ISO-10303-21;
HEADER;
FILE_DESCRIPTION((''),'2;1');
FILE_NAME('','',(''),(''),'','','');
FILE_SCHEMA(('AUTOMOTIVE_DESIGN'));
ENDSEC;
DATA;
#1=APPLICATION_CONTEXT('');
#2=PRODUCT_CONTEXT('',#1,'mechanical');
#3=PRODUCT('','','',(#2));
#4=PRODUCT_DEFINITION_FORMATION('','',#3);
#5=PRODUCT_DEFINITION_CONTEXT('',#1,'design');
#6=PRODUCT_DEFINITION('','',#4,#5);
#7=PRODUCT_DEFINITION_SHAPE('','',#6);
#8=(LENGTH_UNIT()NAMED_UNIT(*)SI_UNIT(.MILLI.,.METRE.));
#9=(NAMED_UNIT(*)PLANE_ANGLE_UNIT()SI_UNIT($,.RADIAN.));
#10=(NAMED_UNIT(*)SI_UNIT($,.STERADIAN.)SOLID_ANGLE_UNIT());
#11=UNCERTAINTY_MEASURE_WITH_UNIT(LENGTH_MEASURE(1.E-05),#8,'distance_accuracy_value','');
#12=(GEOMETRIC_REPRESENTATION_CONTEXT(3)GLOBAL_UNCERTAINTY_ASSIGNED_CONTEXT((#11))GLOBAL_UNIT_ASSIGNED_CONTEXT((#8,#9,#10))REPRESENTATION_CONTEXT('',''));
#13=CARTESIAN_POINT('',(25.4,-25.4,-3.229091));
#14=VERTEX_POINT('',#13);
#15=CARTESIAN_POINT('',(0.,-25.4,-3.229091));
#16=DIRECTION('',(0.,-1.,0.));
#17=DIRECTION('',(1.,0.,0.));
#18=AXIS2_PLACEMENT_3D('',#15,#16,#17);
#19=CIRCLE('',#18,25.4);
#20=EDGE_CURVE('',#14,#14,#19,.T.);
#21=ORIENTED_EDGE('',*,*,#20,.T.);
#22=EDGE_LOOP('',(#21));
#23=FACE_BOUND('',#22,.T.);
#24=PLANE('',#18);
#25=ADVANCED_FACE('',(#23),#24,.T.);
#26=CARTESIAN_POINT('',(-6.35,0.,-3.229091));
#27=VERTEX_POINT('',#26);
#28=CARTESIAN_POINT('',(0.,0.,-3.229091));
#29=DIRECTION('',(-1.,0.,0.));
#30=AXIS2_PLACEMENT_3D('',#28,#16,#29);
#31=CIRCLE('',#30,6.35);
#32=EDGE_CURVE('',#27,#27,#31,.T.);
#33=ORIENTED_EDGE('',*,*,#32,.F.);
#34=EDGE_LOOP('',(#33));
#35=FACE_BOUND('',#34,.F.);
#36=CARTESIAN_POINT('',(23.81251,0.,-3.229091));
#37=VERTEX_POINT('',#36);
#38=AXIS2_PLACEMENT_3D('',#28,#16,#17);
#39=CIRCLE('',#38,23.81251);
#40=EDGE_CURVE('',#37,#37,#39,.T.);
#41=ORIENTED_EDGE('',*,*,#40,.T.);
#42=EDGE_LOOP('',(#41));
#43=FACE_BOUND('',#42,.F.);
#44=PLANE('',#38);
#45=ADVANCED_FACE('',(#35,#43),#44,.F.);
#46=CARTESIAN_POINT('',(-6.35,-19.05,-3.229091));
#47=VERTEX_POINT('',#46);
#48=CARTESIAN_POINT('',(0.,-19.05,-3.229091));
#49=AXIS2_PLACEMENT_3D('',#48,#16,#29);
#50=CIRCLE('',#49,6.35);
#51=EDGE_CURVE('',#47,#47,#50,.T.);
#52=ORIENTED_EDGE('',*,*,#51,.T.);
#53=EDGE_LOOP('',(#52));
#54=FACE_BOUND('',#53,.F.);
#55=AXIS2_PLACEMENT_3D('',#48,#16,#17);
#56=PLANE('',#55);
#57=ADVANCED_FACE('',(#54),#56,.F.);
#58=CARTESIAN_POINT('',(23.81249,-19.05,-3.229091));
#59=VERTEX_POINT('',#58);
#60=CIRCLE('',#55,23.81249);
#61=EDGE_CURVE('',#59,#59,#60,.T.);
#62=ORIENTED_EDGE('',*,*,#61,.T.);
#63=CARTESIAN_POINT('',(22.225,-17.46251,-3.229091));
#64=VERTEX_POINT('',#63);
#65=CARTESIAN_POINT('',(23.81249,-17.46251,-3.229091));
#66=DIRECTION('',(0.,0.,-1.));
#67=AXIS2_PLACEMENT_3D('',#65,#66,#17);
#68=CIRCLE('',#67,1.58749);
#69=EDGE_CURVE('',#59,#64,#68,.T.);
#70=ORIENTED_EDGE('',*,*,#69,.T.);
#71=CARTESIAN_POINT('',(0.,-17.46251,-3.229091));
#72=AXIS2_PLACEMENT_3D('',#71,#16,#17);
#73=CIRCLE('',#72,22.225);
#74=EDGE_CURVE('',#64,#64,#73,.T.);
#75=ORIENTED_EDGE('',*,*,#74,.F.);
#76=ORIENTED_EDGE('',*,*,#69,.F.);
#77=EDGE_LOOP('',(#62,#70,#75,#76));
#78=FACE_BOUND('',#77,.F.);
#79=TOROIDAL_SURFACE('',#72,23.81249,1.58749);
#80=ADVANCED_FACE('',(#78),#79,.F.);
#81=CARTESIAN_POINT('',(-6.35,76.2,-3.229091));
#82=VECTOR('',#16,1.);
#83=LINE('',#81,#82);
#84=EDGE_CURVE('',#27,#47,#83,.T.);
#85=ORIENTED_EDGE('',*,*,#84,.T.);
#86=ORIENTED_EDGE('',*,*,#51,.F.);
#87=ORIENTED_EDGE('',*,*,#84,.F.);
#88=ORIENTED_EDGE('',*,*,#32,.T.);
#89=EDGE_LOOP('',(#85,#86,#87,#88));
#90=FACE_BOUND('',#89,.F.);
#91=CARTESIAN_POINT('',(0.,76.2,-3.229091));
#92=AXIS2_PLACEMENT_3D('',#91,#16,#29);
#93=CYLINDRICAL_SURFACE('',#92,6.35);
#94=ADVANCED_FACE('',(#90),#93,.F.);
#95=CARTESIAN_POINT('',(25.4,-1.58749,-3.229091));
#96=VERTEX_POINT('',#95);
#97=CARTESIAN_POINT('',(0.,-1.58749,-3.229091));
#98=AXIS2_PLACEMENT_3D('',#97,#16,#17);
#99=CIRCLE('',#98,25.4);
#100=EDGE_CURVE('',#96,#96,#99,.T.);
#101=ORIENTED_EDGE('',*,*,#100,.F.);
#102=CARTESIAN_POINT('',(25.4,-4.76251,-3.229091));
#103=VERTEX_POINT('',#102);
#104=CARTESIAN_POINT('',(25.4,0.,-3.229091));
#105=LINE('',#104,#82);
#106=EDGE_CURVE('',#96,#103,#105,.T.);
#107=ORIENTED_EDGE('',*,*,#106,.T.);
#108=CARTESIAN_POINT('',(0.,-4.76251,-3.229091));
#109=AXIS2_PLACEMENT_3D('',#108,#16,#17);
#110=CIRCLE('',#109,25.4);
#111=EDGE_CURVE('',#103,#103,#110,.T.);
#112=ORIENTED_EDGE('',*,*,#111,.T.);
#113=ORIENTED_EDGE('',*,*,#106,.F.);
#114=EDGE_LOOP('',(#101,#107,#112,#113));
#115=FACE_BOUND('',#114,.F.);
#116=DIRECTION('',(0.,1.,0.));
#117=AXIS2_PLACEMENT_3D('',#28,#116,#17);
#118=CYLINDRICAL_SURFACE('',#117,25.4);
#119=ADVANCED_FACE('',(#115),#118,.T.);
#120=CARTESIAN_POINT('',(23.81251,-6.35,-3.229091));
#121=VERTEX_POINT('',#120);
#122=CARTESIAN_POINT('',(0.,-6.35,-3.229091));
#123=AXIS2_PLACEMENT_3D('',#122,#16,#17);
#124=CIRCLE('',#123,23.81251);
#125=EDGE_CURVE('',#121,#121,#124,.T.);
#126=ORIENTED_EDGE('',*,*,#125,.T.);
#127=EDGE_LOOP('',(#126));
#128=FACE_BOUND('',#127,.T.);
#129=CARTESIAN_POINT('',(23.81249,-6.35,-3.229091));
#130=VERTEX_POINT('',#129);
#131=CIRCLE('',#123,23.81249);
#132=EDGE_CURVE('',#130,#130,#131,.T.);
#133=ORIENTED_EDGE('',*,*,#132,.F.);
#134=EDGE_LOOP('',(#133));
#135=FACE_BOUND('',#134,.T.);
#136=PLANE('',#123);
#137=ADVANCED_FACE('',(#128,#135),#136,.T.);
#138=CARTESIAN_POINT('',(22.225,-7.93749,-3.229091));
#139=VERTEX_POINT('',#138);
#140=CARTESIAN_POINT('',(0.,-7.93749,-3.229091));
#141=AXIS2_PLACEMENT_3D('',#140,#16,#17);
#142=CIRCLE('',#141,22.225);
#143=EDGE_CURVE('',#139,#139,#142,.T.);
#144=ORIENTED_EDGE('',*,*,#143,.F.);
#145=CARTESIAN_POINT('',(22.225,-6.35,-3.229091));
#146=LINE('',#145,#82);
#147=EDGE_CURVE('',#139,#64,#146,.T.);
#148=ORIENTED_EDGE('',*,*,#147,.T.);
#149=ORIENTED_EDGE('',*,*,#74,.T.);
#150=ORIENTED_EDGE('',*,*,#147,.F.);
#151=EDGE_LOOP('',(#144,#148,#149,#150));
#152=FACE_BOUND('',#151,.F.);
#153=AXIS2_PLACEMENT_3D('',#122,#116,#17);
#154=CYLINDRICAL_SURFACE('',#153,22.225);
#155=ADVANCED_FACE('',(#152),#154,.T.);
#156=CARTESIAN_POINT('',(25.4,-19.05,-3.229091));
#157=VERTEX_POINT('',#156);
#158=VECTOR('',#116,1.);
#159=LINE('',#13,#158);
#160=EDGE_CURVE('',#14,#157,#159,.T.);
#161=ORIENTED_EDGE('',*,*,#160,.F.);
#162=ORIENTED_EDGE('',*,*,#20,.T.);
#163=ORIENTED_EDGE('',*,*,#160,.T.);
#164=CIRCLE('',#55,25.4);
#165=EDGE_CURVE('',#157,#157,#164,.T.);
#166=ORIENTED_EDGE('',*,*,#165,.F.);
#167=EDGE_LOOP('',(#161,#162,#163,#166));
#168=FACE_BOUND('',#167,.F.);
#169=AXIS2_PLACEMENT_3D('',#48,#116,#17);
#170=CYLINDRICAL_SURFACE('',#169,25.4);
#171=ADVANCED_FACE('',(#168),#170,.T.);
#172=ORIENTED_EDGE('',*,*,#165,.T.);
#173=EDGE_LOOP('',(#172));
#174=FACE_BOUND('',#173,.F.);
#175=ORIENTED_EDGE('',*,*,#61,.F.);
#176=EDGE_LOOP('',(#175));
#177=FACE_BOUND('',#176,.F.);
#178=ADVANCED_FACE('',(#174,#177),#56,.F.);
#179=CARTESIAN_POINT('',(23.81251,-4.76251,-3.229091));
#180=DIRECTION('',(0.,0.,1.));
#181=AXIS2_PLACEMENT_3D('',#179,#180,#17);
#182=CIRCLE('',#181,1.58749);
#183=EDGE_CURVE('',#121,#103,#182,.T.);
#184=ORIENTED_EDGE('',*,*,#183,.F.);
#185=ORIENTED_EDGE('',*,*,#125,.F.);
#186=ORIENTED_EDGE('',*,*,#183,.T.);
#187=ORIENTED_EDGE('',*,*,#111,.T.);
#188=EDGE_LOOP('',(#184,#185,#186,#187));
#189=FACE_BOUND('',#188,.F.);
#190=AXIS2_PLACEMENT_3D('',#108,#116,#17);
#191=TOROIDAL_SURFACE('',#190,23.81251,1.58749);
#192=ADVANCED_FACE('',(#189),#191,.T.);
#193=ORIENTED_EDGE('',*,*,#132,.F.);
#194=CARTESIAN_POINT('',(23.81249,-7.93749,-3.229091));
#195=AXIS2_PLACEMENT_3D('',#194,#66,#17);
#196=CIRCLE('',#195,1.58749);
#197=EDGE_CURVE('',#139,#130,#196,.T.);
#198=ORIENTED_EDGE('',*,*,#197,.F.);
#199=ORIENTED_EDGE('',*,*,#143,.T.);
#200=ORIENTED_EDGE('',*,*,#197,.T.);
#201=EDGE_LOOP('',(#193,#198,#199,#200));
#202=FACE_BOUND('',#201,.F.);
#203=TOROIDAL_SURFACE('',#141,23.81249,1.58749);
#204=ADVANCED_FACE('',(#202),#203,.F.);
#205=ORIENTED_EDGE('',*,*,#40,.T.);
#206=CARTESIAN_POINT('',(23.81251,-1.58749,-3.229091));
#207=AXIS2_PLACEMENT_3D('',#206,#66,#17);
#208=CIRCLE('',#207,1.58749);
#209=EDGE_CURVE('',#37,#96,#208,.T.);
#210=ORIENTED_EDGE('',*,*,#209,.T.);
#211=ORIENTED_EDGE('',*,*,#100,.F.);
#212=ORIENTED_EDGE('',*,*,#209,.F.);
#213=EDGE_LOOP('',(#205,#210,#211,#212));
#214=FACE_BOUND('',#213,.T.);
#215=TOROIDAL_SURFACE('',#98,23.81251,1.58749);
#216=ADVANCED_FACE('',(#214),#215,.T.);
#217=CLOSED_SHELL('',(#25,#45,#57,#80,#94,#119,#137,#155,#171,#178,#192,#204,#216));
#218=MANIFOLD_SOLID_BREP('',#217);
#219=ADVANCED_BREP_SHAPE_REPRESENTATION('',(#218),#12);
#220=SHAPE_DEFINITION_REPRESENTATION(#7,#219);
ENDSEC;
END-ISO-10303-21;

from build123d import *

# Parameters (mm, degrees)
F0_R      = 25.4
F1_DEPTH  = 6.35
F2_R      = 22.225
F3_DEPTH  = 12.7
F4_R      = 25.4
F4_R_2    = 22.225
F5_DEPTH  = 6.35
F7_D      = 3.175
F7_DEPTH  = 3.175
F7_TIP    = 0.9538662327
F8_D      = 12.7
F9_R      = 1.58749
F10_DEPTH = 6.35


# Not quite as in the source:
# - a fillet or chamfer is up to 0.001 mm smaller than in the source, because OpenCascade refuses the exact size


with BuildPart() as f1:
    # F0 (on Front) → F1 (new body)
    with BuildSketch(Plane.XZ):
        with Locations((0, -3.2290907108)):
            Circle(F0_R)
    extrude(amount=F1_DEPTH)

    # F2 (on face) → F3 (join)
    with BuildSketch(Plane.XZ.offset(6.35)):
        with Locations((0, -3.2290907108)):
            Circle(F2_R)
    extrude(amount=F3_DEPTH)

    # F4 (on face) → F5 (join)
    with BuildSketch(Plane.XZ.offset(19.05)):
        with Locations((0, -3.2290907108)):
            Circle(F4_R)
        with Locations((0, -3.2290907108)):
            Circle(F4_R_2, mode=Mode.SUBTRACT)
        with Locations((0, -3.2290907108)):
            Circle(F4_R_2)
    extrude(amount=F5_DEPTH)

    # F7
    with Locations(Plane.XZ.offset(25.4)):
        with Locations((19.05, -3.2290907108), (0, -22.2790907108), (-19.05, -3.2290907108), (0, 15.8209092892)):
            Hole(F7_D / 2, depth=F7_DEPTH)
            with Locations((0, 0, -(F7_DEPTH + F7_TIP / 2))):  # 118° drill point
                Cone(0, F7_D / 2, F7_TIP, mode=Mode.SUBTRACT)

    # F8 (through all)
    with Locations(Plane(origin=(0, 0, 0), x_dir=(1, 0, 0), z_dir=(0, 1, 0))):
        with Locations((0, 3.2290907108)):
            Hole(F8_D / 2)

    # F9 (radius 1.5875 in the source; OpenCascade refuses exactly that, so slightly less here)
    f9_edges = [f1.edges().sort_by_distance(p)[0] for p in [
        (-25.4, -6.35, -3.229091),
        (-25.4, 0, -3.229091),
        (-22.225, -6.35, -3.229091),
        (-25.4, -25.4, -3.229091),
        (-25.4, -19.05, -3.229091),
        (-22.225, -19.05, -3.229091),
    ]]
    fillet(f9_edges, radius=F9_R)

    # F4 (on face) → F10 (join)
    with BuildSketch(Plane.XZ.offset(19.05)):
        with Locations((0, -3.2290907108)):
            Circle(F4_R)
    extrude(amount=F10_DEPTH)


solid = f1.part
